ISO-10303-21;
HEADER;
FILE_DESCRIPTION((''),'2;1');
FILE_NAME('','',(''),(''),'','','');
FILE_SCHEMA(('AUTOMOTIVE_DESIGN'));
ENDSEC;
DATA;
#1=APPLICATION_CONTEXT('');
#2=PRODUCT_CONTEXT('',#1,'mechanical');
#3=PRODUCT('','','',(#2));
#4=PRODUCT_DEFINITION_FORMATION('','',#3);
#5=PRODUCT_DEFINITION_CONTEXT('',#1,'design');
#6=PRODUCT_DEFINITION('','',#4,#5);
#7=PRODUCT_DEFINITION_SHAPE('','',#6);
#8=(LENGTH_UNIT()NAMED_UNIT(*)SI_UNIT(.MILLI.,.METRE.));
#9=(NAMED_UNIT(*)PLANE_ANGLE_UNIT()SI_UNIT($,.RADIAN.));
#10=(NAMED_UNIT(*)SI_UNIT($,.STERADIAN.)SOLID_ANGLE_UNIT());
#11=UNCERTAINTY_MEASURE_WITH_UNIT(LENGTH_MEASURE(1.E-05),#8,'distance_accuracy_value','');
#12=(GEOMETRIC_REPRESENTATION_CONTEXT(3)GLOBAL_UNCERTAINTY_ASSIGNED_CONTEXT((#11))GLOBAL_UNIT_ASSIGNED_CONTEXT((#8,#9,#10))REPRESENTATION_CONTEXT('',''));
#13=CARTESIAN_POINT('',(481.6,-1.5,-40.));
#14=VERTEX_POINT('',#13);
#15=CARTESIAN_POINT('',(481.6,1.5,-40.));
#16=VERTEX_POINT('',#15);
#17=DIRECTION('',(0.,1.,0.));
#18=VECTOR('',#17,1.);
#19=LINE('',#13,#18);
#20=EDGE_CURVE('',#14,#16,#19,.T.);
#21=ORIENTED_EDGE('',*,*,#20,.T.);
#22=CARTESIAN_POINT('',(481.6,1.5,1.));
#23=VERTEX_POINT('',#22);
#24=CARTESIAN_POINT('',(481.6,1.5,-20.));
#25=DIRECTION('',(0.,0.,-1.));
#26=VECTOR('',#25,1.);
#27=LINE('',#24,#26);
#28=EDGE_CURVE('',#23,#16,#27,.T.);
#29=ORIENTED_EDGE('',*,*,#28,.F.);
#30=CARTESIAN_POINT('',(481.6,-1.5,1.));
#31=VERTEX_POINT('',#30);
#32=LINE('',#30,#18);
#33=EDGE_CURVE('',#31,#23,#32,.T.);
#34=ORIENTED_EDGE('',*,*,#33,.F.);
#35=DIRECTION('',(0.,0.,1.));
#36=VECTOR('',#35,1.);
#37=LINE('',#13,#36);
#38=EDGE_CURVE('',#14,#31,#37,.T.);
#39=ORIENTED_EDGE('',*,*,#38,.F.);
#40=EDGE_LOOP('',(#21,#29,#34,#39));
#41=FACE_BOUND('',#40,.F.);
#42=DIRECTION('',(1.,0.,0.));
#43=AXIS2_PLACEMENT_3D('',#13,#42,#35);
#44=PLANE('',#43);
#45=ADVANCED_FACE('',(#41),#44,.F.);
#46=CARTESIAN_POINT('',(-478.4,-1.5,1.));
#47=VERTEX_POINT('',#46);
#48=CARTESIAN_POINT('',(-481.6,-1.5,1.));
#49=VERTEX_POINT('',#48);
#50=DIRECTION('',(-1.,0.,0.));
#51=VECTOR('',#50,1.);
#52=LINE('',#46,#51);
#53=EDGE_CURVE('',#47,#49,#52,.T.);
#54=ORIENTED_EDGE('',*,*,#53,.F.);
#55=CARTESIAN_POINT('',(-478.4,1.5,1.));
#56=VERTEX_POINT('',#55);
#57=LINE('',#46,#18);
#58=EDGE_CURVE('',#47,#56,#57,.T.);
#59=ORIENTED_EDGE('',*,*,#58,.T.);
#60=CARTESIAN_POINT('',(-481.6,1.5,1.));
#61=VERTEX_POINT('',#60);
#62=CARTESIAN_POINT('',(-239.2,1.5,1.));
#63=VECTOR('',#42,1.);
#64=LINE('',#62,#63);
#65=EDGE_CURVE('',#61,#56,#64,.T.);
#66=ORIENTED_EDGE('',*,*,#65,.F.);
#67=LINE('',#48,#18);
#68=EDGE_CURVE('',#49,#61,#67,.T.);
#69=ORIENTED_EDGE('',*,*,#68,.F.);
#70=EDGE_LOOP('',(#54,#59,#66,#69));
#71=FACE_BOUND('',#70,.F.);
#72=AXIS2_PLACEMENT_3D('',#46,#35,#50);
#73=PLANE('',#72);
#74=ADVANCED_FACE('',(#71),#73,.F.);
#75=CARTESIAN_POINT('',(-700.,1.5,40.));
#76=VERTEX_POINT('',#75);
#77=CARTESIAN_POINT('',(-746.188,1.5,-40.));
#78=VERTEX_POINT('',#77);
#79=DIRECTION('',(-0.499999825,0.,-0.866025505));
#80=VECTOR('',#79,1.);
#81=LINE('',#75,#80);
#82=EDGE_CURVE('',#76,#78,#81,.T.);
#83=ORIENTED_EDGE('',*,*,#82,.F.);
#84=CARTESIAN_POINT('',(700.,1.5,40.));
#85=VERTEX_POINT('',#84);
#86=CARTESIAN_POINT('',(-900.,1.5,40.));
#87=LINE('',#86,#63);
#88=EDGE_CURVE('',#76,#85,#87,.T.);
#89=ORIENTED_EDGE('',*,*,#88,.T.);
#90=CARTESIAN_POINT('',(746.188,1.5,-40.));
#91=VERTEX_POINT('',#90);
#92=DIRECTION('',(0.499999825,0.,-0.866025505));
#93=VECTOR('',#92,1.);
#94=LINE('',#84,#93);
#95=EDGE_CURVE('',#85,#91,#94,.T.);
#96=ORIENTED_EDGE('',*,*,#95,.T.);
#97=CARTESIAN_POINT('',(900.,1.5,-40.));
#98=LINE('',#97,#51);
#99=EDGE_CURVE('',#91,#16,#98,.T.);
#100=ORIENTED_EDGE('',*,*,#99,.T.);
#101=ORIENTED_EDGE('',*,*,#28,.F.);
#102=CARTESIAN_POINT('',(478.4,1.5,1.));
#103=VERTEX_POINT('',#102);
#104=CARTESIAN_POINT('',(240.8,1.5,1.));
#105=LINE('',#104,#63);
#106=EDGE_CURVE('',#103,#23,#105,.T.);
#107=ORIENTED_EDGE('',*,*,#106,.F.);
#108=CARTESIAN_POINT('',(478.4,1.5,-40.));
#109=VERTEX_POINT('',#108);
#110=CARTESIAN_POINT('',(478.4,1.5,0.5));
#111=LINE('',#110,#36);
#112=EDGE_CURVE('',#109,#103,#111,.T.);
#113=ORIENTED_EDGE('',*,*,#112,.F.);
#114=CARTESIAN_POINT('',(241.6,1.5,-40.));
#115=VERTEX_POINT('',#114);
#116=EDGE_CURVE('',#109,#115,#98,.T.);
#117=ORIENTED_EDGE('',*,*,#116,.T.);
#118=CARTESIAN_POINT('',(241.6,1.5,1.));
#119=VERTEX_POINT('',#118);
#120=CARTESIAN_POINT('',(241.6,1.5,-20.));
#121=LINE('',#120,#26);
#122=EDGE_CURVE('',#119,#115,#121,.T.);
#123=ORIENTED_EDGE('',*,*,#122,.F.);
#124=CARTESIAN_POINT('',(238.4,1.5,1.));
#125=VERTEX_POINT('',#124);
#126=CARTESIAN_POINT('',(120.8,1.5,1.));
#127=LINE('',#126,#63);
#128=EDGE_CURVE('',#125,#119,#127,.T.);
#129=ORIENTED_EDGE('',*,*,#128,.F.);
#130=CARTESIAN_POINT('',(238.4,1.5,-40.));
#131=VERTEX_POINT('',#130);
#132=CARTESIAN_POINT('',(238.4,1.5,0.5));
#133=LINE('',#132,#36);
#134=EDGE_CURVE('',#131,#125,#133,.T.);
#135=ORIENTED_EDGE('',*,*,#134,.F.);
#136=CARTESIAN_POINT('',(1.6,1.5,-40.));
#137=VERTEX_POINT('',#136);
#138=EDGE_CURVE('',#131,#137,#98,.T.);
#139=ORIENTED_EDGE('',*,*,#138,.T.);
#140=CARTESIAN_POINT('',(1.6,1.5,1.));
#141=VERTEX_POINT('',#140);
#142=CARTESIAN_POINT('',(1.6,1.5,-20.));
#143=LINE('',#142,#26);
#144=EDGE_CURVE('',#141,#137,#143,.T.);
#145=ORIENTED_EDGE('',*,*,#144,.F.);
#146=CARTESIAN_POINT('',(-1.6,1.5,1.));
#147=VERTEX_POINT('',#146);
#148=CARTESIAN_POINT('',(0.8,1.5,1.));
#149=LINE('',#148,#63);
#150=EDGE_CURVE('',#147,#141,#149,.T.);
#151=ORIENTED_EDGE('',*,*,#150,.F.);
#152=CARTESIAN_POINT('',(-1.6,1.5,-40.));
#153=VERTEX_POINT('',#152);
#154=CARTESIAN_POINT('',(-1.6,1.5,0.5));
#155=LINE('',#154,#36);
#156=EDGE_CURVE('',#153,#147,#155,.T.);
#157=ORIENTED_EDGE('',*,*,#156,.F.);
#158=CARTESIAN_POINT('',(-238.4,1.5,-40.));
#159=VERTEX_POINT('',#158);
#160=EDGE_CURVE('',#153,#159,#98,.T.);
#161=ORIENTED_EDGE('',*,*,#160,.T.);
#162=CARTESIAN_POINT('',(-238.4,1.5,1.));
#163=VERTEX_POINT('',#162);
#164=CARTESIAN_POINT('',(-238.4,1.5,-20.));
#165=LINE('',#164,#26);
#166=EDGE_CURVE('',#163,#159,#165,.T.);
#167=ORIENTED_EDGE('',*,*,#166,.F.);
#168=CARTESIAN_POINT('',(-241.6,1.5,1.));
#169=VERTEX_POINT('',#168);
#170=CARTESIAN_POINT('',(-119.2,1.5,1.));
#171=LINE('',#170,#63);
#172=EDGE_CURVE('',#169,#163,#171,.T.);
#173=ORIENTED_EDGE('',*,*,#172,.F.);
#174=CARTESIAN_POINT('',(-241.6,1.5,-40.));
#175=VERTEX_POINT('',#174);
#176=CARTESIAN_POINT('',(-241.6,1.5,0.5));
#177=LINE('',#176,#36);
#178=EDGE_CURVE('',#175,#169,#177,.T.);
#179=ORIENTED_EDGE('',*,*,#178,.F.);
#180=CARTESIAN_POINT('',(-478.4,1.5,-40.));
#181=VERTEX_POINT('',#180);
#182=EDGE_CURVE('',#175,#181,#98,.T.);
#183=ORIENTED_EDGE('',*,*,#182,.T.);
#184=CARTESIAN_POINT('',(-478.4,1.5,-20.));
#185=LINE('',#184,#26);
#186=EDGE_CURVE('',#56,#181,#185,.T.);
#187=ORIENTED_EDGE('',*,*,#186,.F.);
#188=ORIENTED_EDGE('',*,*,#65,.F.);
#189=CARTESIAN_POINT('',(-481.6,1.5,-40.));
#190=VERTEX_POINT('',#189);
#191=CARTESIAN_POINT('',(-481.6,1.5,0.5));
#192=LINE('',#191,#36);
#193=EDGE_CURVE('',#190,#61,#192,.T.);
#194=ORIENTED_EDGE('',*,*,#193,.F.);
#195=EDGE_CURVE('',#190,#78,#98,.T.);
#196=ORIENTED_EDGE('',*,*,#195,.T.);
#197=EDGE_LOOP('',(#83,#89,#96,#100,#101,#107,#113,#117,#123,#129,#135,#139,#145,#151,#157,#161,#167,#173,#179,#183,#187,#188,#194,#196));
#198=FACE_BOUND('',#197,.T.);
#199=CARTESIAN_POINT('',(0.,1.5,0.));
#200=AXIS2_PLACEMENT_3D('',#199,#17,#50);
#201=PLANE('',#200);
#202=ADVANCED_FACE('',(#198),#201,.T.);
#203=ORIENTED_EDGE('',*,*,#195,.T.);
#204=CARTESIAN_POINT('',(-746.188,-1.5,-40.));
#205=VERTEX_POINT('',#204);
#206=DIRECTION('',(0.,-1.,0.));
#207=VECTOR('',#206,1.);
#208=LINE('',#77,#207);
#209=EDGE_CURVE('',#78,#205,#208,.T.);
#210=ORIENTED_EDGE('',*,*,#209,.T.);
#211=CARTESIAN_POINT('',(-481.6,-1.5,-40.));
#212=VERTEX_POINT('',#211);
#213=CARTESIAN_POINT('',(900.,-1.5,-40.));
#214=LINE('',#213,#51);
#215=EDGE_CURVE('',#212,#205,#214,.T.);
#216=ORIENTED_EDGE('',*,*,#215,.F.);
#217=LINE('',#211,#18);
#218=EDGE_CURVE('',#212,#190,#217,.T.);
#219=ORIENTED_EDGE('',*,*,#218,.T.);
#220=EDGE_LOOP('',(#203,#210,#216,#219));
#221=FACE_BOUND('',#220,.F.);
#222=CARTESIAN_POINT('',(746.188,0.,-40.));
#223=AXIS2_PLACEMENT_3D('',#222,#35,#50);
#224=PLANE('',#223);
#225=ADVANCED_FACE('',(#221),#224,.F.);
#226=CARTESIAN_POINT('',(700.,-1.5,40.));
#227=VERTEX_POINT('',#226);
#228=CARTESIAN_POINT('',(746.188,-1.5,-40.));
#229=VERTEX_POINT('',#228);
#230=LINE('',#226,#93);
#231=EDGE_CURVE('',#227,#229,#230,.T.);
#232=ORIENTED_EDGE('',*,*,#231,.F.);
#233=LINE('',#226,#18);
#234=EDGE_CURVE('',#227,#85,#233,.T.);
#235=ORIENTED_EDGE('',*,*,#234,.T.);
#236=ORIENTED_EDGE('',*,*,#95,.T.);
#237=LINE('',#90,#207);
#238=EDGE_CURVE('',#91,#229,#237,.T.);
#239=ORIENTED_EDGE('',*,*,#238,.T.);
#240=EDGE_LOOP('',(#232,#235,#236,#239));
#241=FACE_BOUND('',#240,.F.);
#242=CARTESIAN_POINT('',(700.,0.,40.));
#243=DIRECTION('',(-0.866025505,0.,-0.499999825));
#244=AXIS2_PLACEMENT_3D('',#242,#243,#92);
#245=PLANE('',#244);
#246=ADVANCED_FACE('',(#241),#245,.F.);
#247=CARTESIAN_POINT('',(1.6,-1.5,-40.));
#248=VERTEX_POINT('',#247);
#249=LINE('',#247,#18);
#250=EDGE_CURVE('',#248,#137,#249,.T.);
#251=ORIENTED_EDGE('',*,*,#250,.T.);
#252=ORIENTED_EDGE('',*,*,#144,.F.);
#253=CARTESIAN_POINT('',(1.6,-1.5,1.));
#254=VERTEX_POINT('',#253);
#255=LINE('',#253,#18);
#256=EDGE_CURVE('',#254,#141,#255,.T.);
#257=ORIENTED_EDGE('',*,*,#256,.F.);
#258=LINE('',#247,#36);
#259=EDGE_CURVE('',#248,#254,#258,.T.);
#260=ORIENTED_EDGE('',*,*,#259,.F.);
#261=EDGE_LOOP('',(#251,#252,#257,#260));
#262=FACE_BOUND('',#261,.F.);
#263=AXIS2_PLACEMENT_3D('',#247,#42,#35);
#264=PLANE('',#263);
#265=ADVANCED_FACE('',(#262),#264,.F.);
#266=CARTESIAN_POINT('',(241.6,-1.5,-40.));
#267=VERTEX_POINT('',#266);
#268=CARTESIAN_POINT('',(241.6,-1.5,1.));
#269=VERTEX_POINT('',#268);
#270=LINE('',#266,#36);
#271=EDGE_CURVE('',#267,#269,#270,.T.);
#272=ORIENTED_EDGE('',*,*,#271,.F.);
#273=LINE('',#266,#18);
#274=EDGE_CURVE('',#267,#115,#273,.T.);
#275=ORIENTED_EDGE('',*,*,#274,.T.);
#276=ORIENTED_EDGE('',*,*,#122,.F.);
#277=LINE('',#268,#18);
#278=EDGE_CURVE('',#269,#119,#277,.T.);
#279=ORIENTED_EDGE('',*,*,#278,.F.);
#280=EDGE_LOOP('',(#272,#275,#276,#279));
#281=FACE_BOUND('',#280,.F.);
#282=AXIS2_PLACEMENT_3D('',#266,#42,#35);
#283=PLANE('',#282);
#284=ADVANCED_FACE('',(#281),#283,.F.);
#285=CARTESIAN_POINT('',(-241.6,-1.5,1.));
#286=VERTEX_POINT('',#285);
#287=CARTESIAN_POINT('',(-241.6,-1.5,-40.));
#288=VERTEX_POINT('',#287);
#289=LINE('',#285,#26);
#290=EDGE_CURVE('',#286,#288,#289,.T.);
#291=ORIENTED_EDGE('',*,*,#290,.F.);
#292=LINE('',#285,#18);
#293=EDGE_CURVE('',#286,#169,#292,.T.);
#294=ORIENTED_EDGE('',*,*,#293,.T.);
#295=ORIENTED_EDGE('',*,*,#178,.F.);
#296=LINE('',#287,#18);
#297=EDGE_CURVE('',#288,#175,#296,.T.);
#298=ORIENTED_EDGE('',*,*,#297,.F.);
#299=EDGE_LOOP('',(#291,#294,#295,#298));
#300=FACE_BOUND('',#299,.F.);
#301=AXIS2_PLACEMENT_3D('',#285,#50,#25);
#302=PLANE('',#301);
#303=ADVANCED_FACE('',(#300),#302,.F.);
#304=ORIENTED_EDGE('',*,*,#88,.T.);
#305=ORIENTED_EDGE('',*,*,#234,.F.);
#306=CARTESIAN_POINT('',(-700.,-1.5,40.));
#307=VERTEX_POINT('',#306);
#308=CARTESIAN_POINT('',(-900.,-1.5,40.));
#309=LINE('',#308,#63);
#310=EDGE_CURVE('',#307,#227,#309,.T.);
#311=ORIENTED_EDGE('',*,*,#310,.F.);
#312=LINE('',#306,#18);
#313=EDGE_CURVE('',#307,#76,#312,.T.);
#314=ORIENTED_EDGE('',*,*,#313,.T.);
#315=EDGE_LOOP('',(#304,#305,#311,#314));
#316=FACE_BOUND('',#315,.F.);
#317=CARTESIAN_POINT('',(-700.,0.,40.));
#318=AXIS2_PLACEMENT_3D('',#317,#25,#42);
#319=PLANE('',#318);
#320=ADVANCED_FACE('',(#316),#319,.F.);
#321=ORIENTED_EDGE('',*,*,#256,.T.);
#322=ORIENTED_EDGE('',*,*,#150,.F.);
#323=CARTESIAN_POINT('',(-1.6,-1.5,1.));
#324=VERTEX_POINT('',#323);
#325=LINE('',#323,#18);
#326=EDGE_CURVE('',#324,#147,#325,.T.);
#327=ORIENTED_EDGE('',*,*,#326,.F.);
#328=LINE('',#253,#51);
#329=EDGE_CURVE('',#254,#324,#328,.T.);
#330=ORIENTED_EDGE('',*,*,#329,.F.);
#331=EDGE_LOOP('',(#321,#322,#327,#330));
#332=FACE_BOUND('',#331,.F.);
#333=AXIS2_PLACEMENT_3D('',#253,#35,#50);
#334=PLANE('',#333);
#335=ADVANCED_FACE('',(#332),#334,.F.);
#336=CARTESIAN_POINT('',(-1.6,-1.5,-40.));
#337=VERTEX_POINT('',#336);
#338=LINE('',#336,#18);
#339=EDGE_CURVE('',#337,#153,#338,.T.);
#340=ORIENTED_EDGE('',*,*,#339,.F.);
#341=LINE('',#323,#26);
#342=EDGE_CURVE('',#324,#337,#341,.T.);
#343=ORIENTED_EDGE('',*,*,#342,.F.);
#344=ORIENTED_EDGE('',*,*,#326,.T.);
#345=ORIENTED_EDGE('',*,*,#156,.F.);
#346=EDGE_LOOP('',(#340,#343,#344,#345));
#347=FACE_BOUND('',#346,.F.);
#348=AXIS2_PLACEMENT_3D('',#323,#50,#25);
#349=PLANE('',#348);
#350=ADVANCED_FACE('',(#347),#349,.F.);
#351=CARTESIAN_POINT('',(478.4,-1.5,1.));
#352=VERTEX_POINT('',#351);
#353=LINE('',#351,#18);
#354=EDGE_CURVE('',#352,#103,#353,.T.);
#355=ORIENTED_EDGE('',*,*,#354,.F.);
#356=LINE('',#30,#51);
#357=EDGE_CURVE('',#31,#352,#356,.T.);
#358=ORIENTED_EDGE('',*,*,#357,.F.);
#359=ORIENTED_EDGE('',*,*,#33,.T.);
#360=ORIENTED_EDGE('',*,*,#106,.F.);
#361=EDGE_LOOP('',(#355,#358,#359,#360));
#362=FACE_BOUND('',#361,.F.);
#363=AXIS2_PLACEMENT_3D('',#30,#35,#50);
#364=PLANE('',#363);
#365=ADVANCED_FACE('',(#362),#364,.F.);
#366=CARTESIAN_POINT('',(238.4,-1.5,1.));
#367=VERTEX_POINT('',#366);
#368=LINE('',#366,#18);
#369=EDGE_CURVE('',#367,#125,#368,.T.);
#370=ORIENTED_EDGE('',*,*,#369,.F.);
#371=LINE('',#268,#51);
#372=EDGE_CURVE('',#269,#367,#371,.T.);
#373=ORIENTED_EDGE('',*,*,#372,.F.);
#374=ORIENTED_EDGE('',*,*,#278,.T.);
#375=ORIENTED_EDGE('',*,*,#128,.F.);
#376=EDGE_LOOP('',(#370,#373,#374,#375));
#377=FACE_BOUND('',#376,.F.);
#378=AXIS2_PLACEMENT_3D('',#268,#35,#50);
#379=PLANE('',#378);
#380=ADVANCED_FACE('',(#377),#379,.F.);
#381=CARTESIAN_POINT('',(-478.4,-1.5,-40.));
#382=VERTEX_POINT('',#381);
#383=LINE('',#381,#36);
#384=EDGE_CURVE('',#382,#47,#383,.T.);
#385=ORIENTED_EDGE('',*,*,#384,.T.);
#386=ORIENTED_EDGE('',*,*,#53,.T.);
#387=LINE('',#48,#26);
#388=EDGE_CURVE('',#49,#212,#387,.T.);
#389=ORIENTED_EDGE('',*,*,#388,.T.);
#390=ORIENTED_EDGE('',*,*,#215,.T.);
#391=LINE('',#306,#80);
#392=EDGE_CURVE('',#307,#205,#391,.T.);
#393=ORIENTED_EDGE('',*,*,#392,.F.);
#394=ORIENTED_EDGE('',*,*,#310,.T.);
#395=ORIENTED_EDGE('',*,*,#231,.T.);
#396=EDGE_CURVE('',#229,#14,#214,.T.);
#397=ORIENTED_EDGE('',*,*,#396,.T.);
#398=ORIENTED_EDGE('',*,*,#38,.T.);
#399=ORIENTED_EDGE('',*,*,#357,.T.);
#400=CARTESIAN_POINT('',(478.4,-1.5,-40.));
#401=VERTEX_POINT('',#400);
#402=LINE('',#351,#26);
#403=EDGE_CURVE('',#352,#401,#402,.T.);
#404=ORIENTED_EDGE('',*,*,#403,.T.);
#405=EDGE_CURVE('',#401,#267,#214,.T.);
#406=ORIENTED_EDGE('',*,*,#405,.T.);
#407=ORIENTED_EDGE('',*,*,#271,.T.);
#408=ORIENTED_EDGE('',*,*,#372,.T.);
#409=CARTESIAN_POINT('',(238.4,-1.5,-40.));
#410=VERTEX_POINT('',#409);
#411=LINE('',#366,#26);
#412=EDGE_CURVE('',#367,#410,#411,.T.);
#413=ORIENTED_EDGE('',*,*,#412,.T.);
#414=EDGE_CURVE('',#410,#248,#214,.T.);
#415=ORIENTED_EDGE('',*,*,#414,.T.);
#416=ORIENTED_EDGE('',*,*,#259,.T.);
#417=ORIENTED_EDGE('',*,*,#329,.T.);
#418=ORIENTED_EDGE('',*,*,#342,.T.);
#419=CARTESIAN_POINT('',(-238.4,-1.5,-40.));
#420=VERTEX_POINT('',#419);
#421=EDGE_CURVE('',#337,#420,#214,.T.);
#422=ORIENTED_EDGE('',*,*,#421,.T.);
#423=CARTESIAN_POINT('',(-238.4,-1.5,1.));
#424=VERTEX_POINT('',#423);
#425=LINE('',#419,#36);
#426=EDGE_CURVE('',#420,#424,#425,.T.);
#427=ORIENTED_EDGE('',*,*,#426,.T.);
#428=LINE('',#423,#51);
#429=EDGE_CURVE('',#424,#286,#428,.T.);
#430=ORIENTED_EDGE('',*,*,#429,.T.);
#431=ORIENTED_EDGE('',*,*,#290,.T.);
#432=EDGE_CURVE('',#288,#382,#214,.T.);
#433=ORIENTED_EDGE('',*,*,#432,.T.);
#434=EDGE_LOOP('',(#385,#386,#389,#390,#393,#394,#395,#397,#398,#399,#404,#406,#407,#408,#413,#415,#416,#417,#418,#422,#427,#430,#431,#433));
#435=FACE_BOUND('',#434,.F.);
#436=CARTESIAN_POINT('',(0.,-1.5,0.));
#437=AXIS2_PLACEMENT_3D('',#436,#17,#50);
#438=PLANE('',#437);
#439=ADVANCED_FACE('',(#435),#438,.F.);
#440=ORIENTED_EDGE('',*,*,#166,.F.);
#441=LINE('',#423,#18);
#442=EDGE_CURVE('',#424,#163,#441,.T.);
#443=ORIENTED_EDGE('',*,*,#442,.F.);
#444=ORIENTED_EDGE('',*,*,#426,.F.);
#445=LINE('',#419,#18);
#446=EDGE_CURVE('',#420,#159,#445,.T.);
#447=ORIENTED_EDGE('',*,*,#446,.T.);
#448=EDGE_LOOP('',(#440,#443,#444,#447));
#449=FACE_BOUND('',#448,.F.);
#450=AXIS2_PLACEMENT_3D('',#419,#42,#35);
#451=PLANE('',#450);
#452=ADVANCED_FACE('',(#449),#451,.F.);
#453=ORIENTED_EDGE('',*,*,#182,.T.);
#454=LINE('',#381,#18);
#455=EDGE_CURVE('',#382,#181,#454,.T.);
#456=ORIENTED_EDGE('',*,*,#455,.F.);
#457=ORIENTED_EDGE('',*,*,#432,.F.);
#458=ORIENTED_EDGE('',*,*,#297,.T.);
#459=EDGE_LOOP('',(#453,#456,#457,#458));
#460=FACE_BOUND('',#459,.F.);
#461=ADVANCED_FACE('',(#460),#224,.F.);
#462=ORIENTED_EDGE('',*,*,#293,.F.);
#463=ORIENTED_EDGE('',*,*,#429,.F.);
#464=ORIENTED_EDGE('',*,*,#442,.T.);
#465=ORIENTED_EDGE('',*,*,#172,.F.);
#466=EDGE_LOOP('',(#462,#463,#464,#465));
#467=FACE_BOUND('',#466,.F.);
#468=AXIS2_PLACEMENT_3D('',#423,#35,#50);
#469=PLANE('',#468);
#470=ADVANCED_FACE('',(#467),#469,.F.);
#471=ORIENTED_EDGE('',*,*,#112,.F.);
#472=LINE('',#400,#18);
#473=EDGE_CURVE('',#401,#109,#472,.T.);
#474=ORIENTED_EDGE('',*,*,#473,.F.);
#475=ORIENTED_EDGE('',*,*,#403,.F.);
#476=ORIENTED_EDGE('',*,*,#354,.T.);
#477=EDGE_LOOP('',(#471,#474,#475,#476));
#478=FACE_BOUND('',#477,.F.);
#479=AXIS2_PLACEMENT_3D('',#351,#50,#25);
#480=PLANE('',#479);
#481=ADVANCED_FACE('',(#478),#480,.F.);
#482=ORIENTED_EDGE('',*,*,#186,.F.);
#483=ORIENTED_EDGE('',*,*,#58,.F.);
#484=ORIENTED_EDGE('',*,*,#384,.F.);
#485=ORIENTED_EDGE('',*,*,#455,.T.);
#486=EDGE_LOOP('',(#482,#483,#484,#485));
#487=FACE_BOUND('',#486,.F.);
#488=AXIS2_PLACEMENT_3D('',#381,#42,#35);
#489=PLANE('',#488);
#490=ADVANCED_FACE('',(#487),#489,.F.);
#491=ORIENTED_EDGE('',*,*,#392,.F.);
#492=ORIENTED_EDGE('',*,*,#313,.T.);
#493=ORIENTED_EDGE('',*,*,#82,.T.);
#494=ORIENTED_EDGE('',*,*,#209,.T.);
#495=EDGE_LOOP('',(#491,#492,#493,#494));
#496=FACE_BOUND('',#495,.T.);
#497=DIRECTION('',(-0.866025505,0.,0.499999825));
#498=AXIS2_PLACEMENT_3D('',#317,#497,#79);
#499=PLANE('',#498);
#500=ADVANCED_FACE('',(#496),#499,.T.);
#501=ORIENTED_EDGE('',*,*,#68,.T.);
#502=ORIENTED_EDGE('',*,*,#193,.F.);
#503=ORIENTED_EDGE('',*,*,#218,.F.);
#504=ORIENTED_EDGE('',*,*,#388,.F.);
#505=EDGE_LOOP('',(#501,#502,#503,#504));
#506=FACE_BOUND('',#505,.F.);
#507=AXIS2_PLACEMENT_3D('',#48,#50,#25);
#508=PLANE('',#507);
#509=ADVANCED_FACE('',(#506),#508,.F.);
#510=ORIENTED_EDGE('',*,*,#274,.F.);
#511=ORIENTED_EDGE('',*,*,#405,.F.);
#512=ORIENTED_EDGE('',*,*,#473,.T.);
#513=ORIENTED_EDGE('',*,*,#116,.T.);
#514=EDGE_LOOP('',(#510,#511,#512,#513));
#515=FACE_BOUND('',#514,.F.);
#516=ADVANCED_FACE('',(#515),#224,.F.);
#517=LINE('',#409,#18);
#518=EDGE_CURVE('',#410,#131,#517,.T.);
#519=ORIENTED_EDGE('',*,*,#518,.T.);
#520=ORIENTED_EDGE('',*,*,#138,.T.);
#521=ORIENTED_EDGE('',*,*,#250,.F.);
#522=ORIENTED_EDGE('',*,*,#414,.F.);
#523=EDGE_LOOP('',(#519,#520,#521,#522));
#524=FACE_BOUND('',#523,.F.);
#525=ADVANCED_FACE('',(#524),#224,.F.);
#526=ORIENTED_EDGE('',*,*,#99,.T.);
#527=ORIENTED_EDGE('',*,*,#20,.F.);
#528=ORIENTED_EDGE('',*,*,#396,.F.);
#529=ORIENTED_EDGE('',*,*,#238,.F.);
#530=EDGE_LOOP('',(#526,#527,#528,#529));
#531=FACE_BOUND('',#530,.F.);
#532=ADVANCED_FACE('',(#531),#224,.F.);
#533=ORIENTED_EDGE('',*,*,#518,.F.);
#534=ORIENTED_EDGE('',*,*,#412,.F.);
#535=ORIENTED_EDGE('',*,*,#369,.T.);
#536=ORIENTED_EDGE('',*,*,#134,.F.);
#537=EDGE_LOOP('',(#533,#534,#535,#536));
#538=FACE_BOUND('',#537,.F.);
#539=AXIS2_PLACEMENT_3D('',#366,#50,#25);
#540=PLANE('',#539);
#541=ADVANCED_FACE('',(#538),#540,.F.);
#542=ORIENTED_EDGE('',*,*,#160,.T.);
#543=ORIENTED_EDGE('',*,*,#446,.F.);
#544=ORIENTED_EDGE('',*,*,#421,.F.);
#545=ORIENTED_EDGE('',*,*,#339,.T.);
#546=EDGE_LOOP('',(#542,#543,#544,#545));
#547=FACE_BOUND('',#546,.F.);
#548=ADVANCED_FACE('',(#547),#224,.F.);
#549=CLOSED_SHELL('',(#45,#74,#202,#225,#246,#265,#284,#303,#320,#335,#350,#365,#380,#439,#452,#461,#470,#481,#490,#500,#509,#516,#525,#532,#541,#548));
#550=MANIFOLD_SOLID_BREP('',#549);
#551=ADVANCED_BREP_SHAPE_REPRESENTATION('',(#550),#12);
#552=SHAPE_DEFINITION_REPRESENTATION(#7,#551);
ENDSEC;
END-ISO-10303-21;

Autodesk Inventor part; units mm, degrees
ref_plane "YZ Plane" through (0, 0, 0) normal (1, 0, 0) x (0, 1, 0)
ref_plane "XZ Plane" through (0, 0, 0) normal (0, 1, 0) x (-1, 0, 0)
ref_plane "XY Plane" through (0, 0, 0) normal (0, 0, 1) x (1, 0, 0)
sketch "Sketch1" plane through (0, 0, 0) normal (0, 1, 0) x (-1, 0, 0)
  line L0 (900, 40) -> (-900, 40)
  line L1 (-900, 40) -> (-900, -40)
  line L2 (-900, -40) -> (900, -40)
  line L3 (900, -40) -> (900, 40)
  line L4 (900, 40) -> (-900, -40) construction
  line L5 (700, 40) -> (746.188, -40)
  line L6 (0, 40) -> (0, -40) construction
  line L7 (-700, 40) -> (-746.188, -40)
  point P0 (0, 0)
  point P1 (0, 0)
  dimension "d0" = 80
  dimension "d1" = 1800
  dimension "d3" = 120
  dimension "d6" = 700
  dimension "d7" = 120
  dimension "d8" = 700
extrude "Plate1" add sketch "Sketch1" along normal mid plane 3 contours L5 L2 L7 L0
sketch "Sketch2" plane through (0, -1.5, 0) normal (0, -1, 0) x (1, 0, 0)
  line L0 (-1.6, -40) -> (1.6, -40)
  line L1 (1.6, -40) -> (1.6, 1)
  line L2 (1.6, 1) -> (-1.6, 1)
  line L3 (-1.6, 1) -> (-1.6, -40)
  line L4 (746.188, -40) -> (-746.188, -40) projected
  point P0 (0, 0)
  point P1 (0, -40)
  dimension "d9" = 3.2
  dimension "d10" = 41
extrude "Extrusion1" cut sketch "Sketch2" against normal through all
pattern_linear "Rectangular Pattern1" count 5 spacing 240 along (1, 0, 0) of "Extrusion1" first direction both ways yes
equation "\"d7\" = d3"
equation "\"d8\" = d6"
equation "\"d2\" = Thickness"
equation "\"BendReliefWidth\" = Thickness"
equation "\"BendReliefDepth\" = 0.5 * Thickness"
equation "\"CornerReliefSize\" = 4 * Thickness"
equation "\"MinimumRemnant\" = 2 * Thickness"
equation "\"TransitionRadius\" = BendRadius"
equation "\"JacobiRadiusSize\" = BendRadius"
equation "\"GapSize\" = Thickness"
equation "\"Thickness\" = 3"
equation "\"BendRadius\" = 5"
properties part number "MSC 201 GRID" material "Stainless Steel"
